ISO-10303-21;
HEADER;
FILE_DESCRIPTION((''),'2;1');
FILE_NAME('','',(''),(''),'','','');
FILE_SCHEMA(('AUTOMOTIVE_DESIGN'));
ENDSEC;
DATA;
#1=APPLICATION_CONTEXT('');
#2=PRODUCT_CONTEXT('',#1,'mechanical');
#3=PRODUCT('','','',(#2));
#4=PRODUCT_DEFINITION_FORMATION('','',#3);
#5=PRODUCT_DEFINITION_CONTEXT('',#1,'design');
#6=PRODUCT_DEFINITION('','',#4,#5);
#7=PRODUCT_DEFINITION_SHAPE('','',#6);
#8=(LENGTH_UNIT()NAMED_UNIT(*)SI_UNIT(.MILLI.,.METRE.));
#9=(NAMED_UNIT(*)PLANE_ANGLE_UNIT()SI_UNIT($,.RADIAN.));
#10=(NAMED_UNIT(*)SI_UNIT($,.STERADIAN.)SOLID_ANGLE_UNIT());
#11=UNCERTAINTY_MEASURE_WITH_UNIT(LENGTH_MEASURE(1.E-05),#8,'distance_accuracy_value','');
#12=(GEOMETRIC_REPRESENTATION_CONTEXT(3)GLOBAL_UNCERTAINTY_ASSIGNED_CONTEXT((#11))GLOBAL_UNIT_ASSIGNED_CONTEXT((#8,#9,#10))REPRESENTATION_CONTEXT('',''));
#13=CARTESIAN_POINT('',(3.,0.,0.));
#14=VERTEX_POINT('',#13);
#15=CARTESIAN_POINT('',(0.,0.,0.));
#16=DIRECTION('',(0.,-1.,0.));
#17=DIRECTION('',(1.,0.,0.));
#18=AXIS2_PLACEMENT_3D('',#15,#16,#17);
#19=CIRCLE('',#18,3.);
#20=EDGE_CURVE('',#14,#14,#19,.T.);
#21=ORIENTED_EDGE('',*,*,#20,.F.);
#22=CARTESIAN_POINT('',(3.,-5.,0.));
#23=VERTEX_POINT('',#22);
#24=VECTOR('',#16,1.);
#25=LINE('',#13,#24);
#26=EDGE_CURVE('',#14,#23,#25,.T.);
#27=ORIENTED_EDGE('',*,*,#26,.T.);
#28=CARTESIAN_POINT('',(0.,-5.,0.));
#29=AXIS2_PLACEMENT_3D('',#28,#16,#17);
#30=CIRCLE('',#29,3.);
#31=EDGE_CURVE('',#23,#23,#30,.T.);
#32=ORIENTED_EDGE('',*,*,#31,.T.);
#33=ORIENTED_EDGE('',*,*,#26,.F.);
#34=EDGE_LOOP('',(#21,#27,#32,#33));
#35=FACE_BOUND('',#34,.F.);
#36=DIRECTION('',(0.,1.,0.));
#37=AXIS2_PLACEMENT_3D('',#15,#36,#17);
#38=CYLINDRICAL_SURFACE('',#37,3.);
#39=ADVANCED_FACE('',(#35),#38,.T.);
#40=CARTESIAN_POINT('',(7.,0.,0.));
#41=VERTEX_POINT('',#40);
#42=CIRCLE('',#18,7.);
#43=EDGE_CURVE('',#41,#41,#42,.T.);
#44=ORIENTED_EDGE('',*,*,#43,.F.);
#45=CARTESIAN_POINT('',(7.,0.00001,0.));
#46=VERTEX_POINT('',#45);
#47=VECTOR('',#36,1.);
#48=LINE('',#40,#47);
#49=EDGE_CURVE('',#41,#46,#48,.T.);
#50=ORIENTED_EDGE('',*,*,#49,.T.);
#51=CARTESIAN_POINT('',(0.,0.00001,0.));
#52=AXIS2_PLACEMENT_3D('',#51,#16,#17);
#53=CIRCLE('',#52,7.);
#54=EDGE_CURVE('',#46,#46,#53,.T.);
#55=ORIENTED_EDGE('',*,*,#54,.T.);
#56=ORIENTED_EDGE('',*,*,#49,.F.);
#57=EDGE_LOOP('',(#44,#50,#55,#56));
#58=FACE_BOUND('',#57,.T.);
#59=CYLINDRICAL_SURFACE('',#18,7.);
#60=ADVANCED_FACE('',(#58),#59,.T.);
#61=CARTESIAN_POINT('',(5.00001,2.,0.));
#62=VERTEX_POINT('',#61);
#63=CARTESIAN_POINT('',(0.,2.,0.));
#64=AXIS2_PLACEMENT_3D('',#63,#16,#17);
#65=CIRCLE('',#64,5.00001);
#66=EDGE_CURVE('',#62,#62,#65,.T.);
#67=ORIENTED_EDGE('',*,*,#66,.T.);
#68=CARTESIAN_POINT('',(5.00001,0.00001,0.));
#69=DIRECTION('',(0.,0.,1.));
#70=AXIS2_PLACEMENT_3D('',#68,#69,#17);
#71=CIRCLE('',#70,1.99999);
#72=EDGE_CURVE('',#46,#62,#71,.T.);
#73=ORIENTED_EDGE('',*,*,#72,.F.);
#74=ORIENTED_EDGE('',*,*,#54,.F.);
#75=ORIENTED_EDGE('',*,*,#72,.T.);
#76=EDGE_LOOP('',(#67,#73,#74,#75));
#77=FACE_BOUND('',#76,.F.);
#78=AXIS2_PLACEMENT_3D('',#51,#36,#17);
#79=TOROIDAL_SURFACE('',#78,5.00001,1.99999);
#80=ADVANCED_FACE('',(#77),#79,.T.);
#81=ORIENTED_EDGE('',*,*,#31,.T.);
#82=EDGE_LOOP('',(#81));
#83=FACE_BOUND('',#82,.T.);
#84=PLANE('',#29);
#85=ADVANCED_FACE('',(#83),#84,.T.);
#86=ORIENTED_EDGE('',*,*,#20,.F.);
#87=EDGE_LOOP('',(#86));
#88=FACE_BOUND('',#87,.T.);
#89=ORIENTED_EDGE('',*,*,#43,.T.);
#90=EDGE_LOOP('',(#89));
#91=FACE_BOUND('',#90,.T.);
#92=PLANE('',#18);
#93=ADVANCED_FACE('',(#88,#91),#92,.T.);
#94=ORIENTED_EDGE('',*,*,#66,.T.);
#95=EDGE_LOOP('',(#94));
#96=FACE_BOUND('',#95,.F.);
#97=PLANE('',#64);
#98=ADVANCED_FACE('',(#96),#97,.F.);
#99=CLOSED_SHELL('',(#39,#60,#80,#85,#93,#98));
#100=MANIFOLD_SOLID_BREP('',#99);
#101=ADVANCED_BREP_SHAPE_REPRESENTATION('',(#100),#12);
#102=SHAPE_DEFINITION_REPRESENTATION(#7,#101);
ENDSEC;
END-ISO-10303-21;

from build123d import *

# Parameters (mm, degrees)
F0_R     = 3
F1_DEPTH = 5
F0_R_2   = 7
F2_DEPTH = 2
F3_R     = 1.99999


# Not quite as in the source:
# - a fillet or chamfer is up to 0.001 mm smaller than in the source, because OpenCascade refuses the exact size


with BuildPart() as f1:
    # F0 (on Front) → F1 (new body)
    with BuildSketch(Plane.XZ):
        Circle(F0_R)
    extrude(amount=F1_DEPTH)

    # F0 (on Front) → F2 (join)
    with BuildSketch(Plane.XZ):
        Circle(F0_R_2)
        Circle(F0_R, mode=Mode.SUBTRACT)
        Circle(F0_R)
    extrude(amount=-F2_DEPTH)

    # F3 (radius 2 in the source; OpenCascade refuses exactly that, so slightly less here)
    f3_edges = [f1.edges().sort_by_distance(p)[0] for p in [
        (-7, 2, 0),
    ]]
    fillet(f3_edges, radius=F3_R)


solid = f1.part
